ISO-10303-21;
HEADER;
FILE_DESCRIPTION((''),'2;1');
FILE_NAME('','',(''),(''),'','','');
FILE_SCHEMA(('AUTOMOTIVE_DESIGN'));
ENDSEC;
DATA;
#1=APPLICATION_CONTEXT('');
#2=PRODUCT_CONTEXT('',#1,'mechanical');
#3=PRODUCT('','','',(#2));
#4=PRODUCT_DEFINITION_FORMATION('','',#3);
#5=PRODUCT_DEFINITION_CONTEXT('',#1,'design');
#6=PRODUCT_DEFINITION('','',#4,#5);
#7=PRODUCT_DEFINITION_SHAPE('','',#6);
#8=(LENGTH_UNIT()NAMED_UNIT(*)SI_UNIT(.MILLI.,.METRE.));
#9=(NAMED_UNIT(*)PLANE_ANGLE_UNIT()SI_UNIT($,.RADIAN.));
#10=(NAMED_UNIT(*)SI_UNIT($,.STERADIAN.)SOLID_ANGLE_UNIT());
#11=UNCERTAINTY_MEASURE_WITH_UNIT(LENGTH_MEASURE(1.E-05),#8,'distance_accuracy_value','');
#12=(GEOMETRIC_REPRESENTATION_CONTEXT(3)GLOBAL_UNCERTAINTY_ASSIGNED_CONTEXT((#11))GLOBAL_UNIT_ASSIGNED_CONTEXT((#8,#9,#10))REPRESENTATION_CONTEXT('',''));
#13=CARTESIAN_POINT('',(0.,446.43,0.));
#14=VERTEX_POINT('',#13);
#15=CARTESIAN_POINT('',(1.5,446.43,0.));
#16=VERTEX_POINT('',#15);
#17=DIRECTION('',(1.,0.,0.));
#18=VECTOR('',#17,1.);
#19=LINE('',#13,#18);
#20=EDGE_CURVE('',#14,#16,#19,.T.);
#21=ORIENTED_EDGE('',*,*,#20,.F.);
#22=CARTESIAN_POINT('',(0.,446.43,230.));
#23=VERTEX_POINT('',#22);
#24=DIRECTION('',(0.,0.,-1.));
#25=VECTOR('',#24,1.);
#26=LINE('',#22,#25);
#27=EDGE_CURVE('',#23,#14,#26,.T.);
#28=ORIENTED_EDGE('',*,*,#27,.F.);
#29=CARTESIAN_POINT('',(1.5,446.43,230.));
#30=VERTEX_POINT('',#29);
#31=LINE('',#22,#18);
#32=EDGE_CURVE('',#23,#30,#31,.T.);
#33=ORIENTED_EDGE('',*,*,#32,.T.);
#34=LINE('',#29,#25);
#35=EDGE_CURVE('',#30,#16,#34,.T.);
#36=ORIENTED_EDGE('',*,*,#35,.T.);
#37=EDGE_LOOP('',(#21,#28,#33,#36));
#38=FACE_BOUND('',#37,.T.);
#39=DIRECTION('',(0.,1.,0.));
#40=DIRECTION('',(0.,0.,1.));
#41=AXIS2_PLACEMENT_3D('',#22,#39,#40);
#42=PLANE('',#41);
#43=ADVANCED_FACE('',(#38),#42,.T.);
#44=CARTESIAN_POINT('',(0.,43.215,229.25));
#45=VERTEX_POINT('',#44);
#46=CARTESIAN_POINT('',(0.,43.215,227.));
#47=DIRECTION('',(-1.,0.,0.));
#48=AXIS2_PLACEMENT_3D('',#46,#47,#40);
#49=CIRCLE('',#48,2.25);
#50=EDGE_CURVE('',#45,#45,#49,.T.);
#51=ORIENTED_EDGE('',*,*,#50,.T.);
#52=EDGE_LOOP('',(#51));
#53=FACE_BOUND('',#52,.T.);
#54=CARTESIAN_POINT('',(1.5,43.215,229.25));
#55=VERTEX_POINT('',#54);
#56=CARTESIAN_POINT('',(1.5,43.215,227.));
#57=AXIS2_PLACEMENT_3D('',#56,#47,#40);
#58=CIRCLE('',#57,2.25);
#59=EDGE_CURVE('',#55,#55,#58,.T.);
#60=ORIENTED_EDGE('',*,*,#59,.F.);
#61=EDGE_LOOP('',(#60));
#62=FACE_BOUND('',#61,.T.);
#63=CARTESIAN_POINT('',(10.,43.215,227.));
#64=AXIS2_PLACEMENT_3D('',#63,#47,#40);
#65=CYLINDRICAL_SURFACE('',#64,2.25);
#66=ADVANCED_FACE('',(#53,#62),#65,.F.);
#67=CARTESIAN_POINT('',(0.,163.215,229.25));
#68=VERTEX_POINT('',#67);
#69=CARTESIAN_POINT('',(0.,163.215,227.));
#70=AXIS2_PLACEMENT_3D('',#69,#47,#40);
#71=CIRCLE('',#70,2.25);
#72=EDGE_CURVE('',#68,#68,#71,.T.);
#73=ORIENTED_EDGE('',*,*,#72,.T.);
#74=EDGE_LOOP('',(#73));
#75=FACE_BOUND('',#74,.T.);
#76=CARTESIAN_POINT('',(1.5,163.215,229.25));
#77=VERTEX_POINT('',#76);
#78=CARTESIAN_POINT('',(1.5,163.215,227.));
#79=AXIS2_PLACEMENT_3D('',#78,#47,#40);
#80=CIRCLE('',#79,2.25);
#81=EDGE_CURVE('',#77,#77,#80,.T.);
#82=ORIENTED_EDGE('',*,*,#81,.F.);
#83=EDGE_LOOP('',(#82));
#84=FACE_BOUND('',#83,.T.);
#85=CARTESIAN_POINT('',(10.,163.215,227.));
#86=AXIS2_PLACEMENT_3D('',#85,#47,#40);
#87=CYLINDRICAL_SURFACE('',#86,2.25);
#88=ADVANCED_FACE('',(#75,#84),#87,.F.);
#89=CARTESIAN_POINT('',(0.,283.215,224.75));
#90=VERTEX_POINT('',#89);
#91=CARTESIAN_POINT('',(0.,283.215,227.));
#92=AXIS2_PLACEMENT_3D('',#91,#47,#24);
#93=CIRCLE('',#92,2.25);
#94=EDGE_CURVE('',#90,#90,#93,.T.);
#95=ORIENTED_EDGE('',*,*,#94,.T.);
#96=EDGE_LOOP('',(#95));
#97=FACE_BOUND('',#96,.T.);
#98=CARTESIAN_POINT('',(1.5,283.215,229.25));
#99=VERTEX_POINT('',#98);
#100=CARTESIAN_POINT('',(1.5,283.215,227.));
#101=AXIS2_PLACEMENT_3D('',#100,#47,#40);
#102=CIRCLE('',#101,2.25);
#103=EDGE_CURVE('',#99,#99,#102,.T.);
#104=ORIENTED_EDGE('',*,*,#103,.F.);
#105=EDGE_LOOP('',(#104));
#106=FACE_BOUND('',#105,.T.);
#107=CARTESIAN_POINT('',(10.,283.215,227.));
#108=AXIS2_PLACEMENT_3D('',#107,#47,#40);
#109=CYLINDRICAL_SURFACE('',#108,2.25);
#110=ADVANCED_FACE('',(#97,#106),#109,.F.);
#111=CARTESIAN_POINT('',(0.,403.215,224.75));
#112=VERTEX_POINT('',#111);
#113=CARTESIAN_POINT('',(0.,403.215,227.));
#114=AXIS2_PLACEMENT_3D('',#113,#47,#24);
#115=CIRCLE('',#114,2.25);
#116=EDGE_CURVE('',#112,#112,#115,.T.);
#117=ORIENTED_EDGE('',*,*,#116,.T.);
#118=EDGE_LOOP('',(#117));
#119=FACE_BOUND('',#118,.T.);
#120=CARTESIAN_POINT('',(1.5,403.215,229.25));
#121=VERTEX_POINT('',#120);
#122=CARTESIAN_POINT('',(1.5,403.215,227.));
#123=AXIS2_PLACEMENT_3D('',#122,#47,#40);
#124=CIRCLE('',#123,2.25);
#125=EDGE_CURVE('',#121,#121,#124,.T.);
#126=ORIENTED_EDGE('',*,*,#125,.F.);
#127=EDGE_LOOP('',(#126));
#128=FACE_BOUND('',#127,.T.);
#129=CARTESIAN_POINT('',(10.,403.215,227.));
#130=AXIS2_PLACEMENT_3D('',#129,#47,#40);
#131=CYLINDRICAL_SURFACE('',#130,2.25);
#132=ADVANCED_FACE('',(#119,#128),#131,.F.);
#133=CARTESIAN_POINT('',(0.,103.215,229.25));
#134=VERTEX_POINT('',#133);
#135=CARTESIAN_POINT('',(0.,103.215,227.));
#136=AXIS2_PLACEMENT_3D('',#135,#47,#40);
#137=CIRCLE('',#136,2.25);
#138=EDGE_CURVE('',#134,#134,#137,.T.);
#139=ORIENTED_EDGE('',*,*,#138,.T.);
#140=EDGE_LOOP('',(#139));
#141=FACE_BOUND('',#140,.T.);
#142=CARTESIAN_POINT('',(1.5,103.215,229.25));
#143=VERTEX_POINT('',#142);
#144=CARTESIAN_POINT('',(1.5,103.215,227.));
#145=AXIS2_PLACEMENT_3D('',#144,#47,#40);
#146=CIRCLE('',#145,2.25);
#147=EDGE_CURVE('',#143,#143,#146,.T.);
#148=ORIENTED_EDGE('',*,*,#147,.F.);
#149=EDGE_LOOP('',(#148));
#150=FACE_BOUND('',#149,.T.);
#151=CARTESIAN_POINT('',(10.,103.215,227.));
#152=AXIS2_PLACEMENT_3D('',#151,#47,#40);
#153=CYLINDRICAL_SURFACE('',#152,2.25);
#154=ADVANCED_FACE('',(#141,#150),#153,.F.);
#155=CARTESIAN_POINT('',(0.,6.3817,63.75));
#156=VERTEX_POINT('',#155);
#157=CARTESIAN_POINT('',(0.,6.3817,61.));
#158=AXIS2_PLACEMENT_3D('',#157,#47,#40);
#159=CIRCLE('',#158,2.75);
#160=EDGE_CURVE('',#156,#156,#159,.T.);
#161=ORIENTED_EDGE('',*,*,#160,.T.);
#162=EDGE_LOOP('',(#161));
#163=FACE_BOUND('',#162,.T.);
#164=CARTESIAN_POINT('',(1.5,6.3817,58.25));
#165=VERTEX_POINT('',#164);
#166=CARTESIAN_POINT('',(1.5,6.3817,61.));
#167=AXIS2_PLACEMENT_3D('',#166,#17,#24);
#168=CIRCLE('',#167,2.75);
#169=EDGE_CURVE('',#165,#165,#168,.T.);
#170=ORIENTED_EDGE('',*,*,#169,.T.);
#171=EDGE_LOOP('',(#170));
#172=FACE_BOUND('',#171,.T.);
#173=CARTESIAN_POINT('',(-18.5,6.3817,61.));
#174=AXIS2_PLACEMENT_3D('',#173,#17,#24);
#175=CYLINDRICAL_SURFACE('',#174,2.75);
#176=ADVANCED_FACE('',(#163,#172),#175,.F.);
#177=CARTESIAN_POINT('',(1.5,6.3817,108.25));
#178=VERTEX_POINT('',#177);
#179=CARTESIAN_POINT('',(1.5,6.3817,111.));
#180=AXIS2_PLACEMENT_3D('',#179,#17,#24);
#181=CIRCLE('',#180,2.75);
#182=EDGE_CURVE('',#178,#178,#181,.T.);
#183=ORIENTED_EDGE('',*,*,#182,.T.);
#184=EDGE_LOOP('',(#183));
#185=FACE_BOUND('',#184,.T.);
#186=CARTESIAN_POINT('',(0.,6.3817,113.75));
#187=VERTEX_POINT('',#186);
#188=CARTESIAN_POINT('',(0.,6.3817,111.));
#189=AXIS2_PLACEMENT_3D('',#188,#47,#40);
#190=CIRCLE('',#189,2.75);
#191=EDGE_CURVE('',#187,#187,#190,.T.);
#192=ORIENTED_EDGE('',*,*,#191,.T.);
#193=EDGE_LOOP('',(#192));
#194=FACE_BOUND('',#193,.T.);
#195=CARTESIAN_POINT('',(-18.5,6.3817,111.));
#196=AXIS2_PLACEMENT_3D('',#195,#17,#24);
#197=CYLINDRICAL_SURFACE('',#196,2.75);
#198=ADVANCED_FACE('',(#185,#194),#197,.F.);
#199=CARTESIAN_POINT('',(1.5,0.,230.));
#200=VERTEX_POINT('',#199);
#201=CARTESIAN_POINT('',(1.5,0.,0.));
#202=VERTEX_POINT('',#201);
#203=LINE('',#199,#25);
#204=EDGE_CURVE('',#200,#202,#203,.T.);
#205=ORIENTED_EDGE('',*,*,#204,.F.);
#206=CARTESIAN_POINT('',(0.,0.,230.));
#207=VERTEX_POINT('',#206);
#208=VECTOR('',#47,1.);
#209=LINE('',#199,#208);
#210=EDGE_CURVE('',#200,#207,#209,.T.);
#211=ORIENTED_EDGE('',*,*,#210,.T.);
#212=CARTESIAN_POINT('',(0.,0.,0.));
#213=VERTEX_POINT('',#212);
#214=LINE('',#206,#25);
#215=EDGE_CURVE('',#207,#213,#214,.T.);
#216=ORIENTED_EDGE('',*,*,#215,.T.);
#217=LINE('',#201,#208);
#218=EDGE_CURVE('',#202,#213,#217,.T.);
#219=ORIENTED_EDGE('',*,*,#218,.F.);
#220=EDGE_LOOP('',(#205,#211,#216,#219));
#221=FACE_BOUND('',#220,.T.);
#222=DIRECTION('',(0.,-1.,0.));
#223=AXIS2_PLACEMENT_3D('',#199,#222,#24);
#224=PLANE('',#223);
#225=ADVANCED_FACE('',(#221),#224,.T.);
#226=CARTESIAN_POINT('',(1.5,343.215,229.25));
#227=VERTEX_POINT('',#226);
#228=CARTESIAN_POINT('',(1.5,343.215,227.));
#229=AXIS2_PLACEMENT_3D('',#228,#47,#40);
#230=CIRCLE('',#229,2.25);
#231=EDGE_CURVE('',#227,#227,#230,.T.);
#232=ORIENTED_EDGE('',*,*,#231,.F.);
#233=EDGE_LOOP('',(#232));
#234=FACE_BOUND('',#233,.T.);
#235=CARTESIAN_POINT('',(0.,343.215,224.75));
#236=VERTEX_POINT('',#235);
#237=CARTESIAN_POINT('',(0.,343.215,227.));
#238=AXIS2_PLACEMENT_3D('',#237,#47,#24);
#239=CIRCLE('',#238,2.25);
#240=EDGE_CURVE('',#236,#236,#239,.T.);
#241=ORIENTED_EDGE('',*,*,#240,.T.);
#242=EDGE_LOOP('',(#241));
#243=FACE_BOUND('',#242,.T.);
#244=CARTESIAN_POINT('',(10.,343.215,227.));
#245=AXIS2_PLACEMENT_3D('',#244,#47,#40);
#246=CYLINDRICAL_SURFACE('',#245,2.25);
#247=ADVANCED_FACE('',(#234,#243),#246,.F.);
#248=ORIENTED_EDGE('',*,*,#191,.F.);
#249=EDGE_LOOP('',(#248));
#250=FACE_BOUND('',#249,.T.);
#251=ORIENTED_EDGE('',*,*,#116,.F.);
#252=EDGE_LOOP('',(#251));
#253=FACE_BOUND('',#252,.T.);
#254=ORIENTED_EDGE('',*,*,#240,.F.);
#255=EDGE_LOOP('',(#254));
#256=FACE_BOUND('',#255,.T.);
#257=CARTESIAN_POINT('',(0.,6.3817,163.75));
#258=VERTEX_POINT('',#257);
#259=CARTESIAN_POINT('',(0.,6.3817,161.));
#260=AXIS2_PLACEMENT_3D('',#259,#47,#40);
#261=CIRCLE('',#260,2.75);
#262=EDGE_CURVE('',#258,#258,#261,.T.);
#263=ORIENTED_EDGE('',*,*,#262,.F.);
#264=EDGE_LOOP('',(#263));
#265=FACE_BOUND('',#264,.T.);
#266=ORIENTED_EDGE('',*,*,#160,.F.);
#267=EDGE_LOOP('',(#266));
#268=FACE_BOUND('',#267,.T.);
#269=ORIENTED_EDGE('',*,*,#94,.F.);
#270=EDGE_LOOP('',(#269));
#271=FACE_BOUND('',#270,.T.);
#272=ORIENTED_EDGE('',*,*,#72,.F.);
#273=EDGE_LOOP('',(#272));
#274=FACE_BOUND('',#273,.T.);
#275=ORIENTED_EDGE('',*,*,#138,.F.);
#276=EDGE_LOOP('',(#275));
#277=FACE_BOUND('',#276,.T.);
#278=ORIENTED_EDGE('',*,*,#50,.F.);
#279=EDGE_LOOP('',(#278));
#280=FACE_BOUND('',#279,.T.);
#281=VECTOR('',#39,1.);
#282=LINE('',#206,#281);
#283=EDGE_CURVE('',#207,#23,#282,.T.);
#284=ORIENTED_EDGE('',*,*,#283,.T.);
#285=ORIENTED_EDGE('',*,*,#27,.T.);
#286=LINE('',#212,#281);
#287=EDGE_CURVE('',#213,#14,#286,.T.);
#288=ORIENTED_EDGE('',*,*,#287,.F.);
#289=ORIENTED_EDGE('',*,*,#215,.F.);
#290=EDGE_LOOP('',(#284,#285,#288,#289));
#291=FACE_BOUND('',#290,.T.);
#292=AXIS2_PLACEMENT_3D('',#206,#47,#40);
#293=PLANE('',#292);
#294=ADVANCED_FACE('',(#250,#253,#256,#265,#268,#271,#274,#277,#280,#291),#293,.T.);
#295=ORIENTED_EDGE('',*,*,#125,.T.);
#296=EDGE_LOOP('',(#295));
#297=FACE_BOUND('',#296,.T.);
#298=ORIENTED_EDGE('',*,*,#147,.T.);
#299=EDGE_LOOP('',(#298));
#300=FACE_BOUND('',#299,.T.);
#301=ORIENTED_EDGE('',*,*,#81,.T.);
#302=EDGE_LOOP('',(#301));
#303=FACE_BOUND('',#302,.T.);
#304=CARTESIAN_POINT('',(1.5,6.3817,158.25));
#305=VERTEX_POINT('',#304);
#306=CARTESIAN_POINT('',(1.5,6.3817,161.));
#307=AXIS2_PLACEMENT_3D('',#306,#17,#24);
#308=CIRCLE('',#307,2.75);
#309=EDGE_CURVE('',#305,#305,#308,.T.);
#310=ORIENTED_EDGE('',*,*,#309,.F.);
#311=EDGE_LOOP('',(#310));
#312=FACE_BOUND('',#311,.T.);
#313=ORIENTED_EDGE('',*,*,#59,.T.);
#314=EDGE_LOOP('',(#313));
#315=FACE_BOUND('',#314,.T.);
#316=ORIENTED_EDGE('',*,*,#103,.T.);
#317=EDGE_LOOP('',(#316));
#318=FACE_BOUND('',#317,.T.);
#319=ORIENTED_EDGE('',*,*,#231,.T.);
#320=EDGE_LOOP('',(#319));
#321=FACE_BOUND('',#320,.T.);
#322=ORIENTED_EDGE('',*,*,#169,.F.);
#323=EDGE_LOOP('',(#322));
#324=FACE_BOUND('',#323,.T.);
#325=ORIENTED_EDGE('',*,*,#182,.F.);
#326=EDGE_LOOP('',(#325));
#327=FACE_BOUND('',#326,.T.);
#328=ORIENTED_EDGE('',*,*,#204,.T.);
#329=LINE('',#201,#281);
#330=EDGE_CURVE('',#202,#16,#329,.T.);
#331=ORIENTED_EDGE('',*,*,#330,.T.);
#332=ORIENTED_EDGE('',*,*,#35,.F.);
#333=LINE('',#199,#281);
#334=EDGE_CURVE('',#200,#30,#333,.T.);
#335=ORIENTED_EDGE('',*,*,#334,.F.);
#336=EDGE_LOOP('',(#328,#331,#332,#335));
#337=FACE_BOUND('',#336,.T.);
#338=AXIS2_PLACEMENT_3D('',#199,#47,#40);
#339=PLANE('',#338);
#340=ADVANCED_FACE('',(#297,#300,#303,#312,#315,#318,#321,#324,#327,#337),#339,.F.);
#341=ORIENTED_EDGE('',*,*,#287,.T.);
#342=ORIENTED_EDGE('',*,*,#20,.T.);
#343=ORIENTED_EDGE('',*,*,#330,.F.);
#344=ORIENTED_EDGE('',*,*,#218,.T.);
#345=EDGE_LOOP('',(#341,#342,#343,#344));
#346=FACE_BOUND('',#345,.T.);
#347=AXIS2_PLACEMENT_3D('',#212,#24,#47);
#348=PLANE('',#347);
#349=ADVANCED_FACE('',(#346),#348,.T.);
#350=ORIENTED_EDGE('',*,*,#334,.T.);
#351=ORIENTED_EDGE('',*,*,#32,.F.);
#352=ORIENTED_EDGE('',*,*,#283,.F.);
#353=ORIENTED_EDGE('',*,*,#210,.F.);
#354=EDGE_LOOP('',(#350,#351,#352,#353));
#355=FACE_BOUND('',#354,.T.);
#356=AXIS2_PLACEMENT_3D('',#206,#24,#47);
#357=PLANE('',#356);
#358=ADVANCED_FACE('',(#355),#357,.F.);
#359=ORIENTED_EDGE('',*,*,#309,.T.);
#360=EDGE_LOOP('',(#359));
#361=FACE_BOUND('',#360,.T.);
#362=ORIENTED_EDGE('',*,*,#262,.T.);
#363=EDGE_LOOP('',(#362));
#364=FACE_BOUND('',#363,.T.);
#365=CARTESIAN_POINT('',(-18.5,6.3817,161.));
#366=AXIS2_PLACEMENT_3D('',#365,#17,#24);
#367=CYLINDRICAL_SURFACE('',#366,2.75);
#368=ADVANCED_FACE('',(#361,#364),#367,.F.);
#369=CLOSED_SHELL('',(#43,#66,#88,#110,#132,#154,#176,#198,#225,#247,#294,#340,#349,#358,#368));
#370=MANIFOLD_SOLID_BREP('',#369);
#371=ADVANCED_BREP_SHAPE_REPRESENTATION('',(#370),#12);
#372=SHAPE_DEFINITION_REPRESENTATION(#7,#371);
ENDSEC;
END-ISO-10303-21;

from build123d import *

# Parameters (mm, degrees)
SKETCH_1_W             = 1.5
SKETCH_1_H             = 446.43
SM_BASE_FLANGE_1_DEPTH = 230
SKETCH_10_R            = 2.75
CUT_EXTRUDE_1_DEPTH    = 20
SKETCH_11_R            = 2.25
CUT_EXTRUDE_2_DEPTH    = 10


# Sheet-metal steps are written as plain solids
with BuildPart() as part:
    # Sketch 1 → 基体-法兰1 (new body)
    with BuildSketch(Plane.XY):
        with Locations((0.75, 223.215)):
            Rectangle(SKETCH_1_W, SKETCH_1_H)
    extrude(amount=SM_BASE_FLANGE_1_DEPTH)

    # 草图10 → 切除-拉伸1 (cut)
    with BuildSketch(Plane(origin=(1.5, 0, 0), x_dir=(0, 0, -1), z_dir=(1, 0, 0))):
        with Locations((-161, 6.3817)):
            Circle(SKETCH_10_R)
        with Locations((-111, 6.3817)):
            Circle(SKETCH_10_R)
        with Locations((-61, 6.3817)):
            Circle(SKETCH_10_R)
    extrude(amount=-CUT_EXTRUDE_1_DEPTH, mode=Mode.SUBTRACT)

    # 草图11 → 切除-拉伸2 (cut)
    with BuildSketch(Plane.ZY):
        with Locations((227, 43.215)):
            Circle(SKETCH_11_R)
        with Locations((227, 103.215)):
            Circle(SKETCH_11_R)
        with Locations((227, 163.215)):
            Circle(SKETCH_11_R)
        with Locations((227, 403.215)):
            Circle(SKETCH_11_R)
        with Locations((227, 343.215)):
            Circle(SKETCH_11_R)
        with Locations((227, 283.215)):
            Circle(SKETCH_11_R)
    extrude(amount=-CUT_EXTRUDE_2_DEPTH, mode=Mode.SUBTRACT)


solid = part.part
